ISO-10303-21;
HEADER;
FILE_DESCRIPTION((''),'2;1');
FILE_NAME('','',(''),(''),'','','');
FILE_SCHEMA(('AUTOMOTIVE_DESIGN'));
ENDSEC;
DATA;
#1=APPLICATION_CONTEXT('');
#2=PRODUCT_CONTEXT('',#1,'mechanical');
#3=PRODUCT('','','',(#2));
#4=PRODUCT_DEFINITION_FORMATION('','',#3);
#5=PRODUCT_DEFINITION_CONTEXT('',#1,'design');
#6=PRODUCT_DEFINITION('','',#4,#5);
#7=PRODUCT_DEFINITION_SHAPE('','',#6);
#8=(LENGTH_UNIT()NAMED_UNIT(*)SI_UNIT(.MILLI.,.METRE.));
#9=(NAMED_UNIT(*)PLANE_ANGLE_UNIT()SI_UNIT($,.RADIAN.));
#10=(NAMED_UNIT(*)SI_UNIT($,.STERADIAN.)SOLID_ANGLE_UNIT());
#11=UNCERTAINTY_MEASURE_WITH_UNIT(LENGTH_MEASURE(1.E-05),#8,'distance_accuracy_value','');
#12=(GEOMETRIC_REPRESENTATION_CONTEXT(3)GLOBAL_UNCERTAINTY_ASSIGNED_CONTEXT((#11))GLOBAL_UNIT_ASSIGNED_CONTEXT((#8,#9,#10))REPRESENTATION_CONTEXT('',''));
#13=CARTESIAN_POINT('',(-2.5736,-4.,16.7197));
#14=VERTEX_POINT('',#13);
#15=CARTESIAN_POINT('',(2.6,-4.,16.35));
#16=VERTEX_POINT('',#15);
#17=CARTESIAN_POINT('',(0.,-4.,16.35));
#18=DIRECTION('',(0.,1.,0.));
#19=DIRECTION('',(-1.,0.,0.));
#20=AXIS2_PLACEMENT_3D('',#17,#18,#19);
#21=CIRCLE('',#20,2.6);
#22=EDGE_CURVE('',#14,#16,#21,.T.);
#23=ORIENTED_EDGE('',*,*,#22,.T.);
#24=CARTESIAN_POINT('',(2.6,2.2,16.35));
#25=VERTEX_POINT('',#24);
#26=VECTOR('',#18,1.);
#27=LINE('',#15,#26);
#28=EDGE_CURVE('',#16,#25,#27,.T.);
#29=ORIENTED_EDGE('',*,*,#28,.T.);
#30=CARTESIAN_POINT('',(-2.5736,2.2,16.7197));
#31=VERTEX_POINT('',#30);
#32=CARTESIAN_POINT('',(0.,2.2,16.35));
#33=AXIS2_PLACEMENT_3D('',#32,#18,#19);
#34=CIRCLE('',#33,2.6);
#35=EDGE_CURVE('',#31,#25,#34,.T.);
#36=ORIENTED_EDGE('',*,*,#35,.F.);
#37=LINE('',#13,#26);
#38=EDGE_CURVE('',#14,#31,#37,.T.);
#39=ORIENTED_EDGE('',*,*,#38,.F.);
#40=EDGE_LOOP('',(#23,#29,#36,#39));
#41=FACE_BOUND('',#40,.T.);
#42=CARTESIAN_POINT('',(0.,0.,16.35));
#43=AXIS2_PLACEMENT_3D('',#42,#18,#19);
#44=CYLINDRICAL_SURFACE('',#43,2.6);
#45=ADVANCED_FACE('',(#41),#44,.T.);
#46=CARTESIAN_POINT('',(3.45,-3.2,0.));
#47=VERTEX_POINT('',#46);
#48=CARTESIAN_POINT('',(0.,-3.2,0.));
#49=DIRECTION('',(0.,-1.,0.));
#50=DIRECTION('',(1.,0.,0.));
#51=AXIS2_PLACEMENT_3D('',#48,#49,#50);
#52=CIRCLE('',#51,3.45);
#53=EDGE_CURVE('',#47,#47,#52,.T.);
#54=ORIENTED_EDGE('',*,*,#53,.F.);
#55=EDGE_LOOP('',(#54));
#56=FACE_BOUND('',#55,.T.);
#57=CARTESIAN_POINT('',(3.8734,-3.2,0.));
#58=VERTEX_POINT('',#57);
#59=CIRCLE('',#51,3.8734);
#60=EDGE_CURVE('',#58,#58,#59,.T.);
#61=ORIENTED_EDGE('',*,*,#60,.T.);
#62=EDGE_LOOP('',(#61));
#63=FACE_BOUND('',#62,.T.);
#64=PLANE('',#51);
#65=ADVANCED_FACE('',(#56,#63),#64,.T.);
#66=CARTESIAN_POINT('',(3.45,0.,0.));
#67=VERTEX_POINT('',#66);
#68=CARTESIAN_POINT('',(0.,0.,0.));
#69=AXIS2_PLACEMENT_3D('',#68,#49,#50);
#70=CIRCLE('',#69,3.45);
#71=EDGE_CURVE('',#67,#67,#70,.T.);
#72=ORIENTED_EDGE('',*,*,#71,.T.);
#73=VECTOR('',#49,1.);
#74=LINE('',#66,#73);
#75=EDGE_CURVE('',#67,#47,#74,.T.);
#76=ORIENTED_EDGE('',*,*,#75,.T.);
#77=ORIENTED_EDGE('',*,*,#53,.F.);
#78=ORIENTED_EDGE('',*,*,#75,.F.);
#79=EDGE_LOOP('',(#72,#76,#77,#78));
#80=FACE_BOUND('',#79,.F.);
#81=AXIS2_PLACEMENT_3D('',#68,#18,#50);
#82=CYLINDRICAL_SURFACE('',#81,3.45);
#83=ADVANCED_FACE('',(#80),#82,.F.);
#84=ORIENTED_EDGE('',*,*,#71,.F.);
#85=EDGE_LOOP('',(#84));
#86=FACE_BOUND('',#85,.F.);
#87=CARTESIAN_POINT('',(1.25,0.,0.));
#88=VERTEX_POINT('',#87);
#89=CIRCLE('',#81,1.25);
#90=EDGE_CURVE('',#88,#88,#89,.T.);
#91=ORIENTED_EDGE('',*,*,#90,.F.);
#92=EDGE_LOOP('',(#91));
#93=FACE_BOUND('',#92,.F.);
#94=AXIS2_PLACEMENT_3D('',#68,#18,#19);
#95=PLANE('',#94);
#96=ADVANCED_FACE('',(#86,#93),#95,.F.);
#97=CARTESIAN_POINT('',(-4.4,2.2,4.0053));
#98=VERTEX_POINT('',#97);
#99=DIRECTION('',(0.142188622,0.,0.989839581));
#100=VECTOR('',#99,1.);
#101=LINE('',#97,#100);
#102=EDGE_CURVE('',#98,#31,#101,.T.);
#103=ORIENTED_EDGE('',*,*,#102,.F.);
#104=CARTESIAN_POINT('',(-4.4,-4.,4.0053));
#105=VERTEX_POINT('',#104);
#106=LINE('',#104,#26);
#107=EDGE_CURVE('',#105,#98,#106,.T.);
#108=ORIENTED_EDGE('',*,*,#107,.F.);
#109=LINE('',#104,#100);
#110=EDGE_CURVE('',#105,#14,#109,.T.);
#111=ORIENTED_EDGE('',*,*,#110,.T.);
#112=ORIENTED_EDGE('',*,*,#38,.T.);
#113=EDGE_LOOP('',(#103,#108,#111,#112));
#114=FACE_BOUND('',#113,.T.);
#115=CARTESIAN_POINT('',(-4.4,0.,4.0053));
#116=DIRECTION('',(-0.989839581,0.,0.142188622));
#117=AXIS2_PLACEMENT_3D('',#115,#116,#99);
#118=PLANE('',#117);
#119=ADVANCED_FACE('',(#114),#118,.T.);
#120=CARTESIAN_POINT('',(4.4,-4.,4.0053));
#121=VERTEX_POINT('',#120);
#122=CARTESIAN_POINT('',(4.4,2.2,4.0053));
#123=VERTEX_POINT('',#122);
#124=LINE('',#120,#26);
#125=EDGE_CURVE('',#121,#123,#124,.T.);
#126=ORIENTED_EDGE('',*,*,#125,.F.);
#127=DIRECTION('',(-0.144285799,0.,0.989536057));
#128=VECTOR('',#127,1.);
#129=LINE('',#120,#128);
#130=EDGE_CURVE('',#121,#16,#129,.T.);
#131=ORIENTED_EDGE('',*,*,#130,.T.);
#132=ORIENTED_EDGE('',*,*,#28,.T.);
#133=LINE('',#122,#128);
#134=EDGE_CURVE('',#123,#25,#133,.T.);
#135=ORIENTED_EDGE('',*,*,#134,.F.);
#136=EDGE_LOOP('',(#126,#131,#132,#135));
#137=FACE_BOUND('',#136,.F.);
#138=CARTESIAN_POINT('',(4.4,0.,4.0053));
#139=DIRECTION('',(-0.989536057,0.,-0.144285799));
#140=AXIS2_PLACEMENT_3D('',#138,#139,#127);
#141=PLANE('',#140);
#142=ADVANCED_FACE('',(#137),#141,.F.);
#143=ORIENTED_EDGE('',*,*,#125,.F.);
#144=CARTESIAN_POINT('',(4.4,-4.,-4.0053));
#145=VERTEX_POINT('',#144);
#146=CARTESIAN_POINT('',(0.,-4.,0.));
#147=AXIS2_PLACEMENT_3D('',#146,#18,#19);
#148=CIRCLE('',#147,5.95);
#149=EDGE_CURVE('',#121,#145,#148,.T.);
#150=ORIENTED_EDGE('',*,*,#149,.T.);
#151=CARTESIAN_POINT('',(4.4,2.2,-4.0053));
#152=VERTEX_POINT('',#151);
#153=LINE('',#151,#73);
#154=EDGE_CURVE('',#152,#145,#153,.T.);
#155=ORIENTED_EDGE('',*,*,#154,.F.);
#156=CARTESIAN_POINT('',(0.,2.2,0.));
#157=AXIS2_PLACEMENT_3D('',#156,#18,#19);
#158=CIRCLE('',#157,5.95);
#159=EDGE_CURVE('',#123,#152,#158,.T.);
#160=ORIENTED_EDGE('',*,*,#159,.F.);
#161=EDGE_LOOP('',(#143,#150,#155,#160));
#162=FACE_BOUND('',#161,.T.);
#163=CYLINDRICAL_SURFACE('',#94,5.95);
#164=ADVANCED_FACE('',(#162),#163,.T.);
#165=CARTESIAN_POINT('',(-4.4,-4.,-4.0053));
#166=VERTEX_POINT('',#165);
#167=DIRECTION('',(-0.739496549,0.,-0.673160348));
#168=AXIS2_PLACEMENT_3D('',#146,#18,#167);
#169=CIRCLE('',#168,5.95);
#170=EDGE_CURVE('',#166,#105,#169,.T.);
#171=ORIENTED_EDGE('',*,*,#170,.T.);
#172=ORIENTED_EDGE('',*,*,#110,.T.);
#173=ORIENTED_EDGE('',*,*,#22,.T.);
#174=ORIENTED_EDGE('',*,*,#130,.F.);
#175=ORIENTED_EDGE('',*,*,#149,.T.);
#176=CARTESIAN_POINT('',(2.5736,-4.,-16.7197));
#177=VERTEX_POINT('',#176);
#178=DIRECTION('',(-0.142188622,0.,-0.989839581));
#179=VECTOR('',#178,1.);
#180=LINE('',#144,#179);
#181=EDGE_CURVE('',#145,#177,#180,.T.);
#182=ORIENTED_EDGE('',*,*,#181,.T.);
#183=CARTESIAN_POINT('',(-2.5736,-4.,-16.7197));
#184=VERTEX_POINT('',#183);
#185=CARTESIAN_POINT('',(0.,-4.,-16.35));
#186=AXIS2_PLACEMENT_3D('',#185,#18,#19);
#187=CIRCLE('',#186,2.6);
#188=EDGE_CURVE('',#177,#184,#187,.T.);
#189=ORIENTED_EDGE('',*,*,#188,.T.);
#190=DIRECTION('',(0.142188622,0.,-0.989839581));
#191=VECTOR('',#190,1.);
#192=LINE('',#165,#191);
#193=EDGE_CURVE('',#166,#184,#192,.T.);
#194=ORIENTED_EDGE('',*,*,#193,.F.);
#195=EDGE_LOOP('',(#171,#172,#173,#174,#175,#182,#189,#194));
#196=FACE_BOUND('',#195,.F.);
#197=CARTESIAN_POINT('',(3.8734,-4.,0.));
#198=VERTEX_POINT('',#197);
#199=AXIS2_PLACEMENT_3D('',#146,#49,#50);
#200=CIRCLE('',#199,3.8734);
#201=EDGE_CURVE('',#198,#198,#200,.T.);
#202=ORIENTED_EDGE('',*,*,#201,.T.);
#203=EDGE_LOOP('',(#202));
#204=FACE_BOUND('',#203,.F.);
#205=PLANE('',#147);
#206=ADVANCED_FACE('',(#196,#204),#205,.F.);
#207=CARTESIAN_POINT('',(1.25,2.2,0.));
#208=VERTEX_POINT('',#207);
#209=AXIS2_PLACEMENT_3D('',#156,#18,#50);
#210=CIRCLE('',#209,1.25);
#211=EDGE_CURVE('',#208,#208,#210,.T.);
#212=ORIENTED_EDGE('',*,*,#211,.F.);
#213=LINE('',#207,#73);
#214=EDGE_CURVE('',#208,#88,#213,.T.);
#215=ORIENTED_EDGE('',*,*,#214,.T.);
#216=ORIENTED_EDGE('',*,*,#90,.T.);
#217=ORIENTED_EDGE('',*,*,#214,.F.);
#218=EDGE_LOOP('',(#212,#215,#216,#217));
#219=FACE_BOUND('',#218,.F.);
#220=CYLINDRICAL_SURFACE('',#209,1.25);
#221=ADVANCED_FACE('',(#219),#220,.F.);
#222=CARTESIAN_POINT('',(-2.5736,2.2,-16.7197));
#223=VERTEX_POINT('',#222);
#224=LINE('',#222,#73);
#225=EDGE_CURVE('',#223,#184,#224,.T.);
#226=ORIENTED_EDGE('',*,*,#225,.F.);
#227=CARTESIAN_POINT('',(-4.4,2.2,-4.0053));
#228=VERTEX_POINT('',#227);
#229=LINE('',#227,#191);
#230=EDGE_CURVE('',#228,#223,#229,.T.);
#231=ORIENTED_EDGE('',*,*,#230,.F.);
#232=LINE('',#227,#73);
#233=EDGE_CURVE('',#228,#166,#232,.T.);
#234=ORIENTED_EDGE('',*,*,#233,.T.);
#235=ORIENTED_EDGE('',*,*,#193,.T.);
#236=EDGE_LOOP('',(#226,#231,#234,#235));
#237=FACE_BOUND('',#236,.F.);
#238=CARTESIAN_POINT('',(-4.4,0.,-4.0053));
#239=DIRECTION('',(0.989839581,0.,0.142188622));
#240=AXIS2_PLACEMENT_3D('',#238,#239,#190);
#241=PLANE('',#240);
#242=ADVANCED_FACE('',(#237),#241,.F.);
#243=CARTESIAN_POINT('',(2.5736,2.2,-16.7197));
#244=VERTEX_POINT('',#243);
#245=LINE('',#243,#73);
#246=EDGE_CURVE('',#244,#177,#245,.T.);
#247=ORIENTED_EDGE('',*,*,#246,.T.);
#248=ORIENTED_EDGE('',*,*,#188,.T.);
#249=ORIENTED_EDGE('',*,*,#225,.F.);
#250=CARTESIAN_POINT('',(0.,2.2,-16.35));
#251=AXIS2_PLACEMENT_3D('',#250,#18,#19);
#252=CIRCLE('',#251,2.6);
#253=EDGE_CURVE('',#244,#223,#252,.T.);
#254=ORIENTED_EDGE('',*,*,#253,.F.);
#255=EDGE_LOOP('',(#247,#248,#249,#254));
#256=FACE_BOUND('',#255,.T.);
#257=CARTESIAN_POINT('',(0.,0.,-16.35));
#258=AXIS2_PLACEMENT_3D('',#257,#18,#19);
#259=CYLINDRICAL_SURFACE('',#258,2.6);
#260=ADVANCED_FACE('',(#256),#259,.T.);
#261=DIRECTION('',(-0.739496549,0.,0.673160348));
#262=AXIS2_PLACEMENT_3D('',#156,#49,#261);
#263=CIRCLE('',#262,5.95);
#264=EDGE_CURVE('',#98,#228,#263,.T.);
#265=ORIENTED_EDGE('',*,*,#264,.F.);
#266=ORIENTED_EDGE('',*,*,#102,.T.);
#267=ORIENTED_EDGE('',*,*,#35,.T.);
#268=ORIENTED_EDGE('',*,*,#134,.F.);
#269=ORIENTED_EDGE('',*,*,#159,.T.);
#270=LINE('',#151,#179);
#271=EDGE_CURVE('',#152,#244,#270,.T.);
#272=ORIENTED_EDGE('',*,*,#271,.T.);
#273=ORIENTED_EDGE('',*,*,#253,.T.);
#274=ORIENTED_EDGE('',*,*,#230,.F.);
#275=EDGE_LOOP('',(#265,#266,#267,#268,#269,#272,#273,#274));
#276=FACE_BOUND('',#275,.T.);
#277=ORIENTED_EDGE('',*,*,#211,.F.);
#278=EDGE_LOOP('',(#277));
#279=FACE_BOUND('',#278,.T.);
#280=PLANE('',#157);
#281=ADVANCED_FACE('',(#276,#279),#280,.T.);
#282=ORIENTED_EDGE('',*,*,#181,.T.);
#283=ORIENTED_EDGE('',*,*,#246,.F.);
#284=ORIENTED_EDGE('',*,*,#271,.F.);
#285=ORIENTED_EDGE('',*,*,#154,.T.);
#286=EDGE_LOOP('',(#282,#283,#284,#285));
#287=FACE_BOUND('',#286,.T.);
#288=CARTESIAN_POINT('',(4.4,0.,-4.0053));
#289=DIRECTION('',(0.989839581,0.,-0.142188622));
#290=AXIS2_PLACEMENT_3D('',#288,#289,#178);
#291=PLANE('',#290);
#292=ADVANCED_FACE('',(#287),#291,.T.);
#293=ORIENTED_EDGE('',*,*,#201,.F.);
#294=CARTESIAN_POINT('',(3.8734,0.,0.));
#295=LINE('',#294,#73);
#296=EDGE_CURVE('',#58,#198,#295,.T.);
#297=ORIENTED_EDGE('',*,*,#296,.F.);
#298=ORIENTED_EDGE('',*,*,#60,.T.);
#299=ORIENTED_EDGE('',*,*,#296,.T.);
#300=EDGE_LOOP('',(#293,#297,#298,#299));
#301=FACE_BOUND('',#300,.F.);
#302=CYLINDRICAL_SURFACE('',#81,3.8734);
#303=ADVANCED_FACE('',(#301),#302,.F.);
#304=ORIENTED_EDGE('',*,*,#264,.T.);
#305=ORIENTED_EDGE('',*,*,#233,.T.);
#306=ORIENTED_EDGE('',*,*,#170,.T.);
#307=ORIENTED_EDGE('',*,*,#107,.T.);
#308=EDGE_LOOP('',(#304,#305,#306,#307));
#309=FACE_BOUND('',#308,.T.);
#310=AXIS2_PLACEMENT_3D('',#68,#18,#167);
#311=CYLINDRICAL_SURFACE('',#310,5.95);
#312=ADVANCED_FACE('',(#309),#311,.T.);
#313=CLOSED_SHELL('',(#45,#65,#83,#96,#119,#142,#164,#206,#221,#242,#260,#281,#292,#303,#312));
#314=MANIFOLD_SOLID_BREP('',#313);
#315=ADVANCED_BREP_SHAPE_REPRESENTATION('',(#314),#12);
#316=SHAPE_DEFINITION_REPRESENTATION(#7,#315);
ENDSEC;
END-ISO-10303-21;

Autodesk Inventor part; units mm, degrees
ref_plane "YZ Plane" through (0, 0, 0) normal (1, 0, 0) x (0, 1, 0)
ref_plane "XZ Plane" through (0, 0, 0) normal (0, 1, 0) x (-1, 0, 0)
ref_plane "XY Plane" through (0, 0, 0) normal (0, 0, 1) x (1, 0, 0)
sketch "Sketch1" plane through (0, 0, 0) normal (0, 1, 0) x (-1, 0, 0)
  circle A0 centre (0, 0) radius 5.95
  circle A1 centre (0, -16.35) radius 2.6
  line L0 (4.4, -4.0053) -> (2.5736, -16.7197)
  circle A2 centre (0, 16.35) radius 2.6
  line L1 (4.4, 4.0053) -> (2.5736, 16.7197)
  line L2 (-4.4, 4.0053) -> (-2.6, 16.35)
  line L3 (-4.4, -4.0053) -> (-2.5736, -16.7197)
  dimension "d0" = 11.9
  dimension "d1" = 5.2
  dimension "d2" = 4.4
  dimension "d3" = 5.2
  dimension "d4" = 16.35
  dimension "d5" = 16.35
  dimension "d6" = 4.4
  dimension "d7" = 4.4
  dimension "d8" = 4.4
  dimension "d9" = 0
extrude "Extrusion1" add sketch "Sketch1" along normal blind 2.2
sketch "Sketch2" plane through (0, 0, 0) normal (0, -1, 0) x (1, 0, 0)
  circle A0 centre (0, 0) radius 3.8734
  circle A1 centre (0, 0) radius 3.45
  dimension "d12" = 6.9
extrude "Extrusion2" add sketch "Sketch2" along normal blind 3.2
sketch "Sketch3" plane through (0, 2.2, 0) normal (0, 1, 0) x (1, 0, 0)
  circle A0 centre (0, 0) radius 1.25
  dimension "d15" = 2.5
extrude "Extrusion3" cut sketch "Sketch3" against normal blind 2.2
thicken "Thicken2" operation add thickness 4 both sides no extend neighbours no toward (0, -1, 0) faces at (0.1556, 0, -12.4282)
properties part number "servo_attach"
